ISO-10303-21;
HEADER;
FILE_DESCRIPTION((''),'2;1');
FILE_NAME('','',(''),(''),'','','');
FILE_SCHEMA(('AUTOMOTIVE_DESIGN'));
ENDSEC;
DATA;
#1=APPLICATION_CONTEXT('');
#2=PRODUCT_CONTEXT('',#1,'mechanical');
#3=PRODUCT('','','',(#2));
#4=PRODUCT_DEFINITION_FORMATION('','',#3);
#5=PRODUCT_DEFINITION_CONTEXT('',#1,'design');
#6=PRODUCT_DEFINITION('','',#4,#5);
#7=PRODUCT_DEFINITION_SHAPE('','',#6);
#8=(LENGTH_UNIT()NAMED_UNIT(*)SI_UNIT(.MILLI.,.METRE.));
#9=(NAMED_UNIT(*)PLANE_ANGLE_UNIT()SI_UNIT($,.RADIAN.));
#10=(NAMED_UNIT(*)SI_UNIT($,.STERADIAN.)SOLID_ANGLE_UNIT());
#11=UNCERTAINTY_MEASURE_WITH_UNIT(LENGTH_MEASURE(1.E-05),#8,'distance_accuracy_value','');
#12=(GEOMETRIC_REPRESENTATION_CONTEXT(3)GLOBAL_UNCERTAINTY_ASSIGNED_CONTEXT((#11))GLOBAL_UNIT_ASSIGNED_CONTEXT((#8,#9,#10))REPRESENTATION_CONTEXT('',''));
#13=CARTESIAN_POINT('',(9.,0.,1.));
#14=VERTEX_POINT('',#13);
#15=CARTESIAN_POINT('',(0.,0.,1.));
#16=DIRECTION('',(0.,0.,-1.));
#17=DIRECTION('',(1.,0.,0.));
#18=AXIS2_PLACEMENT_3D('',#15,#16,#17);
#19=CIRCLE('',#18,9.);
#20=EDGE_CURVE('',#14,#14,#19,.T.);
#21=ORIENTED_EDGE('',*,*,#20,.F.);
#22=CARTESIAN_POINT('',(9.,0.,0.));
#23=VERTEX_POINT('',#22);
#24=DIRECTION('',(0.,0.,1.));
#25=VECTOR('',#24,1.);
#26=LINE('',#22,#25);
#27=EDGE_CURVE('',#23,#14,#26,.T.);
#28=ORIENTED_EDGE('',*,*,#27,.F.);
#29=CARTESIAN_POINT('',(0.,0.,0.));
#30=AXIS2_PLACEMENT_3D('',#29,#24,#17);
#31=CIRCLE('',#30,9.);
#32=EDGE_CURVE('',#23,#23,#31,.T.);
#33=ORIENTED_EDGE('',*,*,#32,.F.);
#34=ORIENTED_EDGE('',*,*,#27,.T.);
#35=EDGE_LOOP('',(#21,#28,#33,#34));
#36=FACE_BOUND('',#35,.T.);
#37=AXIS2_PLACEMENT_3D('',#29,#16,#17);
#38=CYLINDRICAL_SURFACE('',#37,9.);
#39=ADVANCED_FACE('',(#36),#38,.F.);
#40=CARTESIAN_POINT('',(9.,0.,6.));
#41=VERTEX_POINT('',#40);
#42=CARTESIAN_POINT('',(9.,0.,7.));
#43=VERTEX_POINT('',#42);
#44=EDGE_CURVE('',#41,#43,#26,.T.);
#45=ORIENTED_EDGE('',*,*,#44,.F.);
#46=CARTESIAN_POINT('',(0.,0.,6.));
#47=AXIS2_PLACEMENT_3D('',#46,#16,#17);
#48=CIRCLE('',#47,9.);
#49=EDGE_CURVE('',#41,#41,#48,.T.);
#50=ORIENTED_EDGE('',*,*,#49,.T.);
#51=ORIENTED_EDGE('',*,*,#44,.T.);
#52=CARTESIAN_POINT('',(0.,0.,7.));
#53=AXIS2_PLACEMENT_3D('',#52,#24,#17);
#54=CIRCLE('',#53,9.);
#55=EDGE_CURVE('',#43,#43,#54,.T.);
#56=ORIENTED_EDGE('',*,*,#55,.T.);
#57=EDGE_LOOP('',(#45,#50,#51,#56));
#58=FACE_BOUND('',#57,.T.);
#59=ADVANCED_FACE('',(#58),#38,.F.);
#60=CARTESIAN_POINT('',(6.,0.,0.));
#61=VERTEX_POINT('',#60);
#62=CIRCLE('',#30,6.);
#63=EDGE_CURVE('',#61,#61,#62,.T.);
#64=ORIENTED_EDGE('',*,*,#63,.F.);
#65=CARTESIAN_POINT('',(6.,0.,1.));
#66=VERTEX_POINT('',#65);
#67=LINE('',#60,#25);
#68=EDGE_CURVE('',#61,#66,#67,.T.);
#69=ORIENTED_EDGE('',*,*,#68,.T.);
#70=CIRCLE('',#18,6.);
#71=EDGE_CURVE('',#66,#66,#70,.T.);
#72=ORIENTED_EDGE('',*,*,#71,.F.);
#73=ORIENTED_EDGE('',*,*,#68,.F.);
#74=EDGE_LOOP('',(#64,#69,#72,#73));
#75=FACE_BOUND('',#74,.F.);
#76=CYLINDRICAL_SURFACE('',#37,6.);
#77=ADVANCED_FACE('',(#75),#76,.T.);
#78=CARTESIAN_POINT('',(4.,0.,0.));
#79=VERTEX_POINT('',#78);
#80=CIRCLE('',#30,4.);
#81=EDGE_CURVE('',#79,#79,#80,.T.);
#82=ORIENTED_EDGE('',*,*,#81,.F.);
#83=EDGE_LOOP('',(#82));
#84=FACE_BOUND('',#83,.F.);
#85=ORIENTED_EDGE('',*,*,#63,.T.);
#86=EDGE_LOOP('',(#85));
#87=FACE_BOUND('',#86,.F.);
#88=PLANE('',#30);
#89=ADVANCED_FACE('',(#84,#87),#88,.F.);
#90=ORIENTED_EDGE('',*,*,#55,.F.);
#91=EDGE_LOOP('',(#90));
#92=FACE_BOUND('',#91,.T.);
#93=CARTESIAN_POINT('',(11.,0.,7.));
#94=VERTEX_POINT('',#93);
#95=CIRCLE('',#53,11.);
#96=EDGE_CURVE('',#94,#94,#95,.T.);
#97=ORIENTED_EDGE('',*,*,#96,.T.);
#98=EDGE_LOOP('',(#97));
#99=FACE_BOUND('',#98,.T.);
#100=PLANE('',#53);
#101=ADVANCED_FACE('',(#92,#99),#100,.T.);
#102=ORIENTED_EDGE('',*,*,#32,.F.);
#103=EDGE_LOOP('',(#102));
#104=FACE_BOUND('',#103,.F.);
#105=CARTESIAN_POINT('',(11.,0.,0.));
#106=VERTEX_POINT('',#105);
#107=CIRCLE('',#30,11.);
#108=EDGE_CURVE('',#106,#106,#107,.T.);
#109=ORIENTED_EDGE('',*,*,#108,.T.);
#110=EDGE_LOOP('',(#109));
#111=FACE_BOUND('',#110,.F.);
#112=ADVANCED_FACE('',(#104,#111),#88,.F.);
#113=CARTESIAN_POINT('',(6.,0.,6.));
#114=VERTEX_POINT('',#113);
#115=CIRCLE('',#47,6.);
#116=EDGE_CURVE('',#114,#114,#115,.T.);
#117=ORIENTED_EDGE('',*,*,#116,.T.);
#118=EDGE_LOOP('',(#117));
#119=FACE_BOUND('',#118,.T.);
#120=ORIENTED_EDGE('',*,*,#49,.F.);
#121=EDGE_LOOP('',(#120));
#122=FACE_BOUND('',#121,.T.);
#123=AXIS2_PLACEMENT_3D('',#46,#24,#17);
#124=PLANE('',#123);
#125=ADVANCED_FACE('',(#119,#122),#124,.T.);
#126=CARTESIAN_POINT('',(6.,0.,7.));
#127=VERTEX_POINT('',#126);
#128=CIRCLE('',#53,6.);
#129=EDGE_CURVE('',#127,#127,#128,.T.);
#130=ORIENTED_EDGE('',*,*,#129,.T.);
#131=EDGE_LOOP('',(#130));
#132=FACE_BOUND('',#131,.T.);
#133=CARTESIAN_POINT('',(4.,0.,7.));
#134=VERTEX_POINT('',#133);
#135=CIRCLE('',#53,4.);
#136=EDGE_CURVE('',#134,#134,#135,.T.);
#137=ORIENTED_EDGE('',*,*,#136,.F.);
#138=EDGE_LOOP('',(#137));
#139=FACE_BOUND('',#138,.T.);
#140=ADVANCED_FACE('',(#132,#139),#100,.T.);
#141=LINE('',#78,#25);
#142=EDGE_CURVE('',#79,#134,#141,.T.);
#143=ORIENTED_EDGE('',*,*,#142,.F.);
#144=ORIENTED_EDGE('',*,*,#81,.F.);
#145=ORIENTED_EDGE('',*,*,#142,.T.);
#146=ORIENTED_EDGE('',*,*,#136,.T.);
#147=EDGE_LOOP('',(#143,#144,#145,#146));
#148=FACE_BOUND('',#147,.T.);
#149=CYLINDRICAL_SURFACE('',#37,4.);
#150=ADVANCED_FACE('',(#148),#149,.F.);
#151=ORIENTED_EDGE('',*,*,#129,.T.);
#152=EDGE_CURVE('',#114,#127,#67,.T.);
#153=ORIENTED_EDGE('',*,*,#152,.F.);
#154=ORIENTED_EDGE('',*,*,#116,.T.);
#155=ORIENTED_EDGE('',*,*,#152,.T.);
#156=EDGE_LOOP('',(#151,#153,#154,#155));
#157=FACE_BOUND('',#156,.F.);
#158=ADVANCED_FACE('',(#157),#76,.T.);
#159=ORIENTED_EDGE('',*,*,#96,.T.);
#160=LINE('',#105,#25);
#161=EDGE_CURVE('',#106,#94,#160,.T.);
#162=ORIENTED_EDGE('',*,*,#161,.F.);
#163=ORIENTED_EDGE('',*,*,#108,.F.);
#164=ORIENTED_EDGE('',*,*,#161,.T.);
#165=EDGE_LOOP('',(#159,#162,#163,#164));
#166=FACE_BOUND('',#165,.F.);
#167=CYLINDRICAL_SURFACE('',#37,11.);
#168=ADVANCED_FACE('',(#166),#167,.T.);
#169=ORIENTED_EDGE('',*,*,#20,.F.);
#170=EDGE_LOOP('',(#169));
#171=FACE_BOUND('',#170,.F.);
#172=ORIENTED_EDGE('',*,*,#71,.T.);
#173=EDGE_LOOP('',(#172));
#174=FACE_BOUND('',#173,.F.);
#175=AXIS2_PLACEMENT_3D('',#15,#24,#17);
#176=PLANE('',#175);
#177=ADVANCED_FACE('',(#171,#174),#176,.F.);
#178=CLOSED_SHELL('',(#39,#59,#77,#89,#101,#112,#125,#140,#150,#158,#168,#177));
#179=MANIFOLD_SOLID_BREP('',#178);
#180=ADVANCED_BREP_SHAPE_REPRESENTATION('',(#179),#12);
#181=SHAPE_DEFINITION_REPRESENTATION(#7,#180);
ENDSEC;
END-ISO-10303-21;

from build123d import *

# Parameters (mm, degrees)
F0_R     = 11
F0_R_2   = 4
F1_DEPTH = 7
F2_T     = -2
F3_DEPTH = 4
F4_T     = 2
F5_DEPTH = 3


# Not quite as in the source:
# - a shell that OpenCascade refuses in one call is made with other operations: the cavity is built on its own and cut out


with BuildPart() as f1:
    # F0 (on Top) → F1 (new body)
    with BuildSketch(Plane.XY):
        Circle(F0_R)
        Circle(F0_R_2, mode=Mode.SUBTRACT)
    extrude(amount=F1_DEPTH)

    # F2
    f2_openings = [f1.faces().sort_by_distance(p)[0] for p in [
        (-10.688873, 0, 7),
    ]]
    offset(amount=F2_T, openings=f2_openings)

    # F3 (add): a face of the model
    f3_faces = [f1.faces().sort_by_distance(p)[0] for p in [
        (-8.7454415588, 0, 2),
    ]]
    extrude(f3_faces, amount=F3_DEPTH)

    # F4: shell of thickness 2, made by hand


with BuildPart() as f4_core1:
    # F4_t2: copy of F1
    add(f1.part)

    # the walls: a layer under each face that stays
    f4_faces = [f4_core1.faces().sort_by_distance(p)[0] for p in [
        (-11, 0, 3.5),
        (-7.3333333333, -7.3333333333, 7),
        (-4, 0, 3.5),
        (-9, 0, 6.5),
        (-4, -4, 7),
        (-6, -6, 6),
        (-6, 0, 6.5),
    ]]
    thicken(f4_faces, amount=-F4_T, mode=Mode.SUBTRACT)

    # F4_s3 → F4_t4 (revolve, cut)
    with BuildSketch(Plane.XZ):
        Polygon((8.98, 6.02), (11, 6), (11, 4), (9, 4), align=None)
    revolve(axis=Axis((0, 0, 6), (0, 0, -1)), mode=Mode.SUBTRACT)

    # F4_s5 → F4_t6 (revolve, cut)
    with BuildSketch(Plane.XZ):
        Polygon((6.02, 6.02), (6, 4), (4, 4), (4, 6), align=None)
    revolve(axis=Axis((0, 0, 6), (0, 0, -1)), mode=Mode.SUBTRACT)


with BuildPart() as f1_1:
    add(f1.part)

    # what is left inside the walls is the cavity
    f4_cavity = [f4_core1.part.solids().sort_by_distance(p)[0] for p in [
        (-8.98, 0, 2.666667),
    ]]
    add(f4_cavity, mode=Mode.SUBTRACT)

    # F5 (add): a face of the model
    f5_faces = [f1_1.faces().sort_by_distance(p)[0] for p in [
        (-8.7454415588, 0, 4),
    ]]
    extrude(f5_faces, amount=F5_DEPTH)


solid = f1_1.part
